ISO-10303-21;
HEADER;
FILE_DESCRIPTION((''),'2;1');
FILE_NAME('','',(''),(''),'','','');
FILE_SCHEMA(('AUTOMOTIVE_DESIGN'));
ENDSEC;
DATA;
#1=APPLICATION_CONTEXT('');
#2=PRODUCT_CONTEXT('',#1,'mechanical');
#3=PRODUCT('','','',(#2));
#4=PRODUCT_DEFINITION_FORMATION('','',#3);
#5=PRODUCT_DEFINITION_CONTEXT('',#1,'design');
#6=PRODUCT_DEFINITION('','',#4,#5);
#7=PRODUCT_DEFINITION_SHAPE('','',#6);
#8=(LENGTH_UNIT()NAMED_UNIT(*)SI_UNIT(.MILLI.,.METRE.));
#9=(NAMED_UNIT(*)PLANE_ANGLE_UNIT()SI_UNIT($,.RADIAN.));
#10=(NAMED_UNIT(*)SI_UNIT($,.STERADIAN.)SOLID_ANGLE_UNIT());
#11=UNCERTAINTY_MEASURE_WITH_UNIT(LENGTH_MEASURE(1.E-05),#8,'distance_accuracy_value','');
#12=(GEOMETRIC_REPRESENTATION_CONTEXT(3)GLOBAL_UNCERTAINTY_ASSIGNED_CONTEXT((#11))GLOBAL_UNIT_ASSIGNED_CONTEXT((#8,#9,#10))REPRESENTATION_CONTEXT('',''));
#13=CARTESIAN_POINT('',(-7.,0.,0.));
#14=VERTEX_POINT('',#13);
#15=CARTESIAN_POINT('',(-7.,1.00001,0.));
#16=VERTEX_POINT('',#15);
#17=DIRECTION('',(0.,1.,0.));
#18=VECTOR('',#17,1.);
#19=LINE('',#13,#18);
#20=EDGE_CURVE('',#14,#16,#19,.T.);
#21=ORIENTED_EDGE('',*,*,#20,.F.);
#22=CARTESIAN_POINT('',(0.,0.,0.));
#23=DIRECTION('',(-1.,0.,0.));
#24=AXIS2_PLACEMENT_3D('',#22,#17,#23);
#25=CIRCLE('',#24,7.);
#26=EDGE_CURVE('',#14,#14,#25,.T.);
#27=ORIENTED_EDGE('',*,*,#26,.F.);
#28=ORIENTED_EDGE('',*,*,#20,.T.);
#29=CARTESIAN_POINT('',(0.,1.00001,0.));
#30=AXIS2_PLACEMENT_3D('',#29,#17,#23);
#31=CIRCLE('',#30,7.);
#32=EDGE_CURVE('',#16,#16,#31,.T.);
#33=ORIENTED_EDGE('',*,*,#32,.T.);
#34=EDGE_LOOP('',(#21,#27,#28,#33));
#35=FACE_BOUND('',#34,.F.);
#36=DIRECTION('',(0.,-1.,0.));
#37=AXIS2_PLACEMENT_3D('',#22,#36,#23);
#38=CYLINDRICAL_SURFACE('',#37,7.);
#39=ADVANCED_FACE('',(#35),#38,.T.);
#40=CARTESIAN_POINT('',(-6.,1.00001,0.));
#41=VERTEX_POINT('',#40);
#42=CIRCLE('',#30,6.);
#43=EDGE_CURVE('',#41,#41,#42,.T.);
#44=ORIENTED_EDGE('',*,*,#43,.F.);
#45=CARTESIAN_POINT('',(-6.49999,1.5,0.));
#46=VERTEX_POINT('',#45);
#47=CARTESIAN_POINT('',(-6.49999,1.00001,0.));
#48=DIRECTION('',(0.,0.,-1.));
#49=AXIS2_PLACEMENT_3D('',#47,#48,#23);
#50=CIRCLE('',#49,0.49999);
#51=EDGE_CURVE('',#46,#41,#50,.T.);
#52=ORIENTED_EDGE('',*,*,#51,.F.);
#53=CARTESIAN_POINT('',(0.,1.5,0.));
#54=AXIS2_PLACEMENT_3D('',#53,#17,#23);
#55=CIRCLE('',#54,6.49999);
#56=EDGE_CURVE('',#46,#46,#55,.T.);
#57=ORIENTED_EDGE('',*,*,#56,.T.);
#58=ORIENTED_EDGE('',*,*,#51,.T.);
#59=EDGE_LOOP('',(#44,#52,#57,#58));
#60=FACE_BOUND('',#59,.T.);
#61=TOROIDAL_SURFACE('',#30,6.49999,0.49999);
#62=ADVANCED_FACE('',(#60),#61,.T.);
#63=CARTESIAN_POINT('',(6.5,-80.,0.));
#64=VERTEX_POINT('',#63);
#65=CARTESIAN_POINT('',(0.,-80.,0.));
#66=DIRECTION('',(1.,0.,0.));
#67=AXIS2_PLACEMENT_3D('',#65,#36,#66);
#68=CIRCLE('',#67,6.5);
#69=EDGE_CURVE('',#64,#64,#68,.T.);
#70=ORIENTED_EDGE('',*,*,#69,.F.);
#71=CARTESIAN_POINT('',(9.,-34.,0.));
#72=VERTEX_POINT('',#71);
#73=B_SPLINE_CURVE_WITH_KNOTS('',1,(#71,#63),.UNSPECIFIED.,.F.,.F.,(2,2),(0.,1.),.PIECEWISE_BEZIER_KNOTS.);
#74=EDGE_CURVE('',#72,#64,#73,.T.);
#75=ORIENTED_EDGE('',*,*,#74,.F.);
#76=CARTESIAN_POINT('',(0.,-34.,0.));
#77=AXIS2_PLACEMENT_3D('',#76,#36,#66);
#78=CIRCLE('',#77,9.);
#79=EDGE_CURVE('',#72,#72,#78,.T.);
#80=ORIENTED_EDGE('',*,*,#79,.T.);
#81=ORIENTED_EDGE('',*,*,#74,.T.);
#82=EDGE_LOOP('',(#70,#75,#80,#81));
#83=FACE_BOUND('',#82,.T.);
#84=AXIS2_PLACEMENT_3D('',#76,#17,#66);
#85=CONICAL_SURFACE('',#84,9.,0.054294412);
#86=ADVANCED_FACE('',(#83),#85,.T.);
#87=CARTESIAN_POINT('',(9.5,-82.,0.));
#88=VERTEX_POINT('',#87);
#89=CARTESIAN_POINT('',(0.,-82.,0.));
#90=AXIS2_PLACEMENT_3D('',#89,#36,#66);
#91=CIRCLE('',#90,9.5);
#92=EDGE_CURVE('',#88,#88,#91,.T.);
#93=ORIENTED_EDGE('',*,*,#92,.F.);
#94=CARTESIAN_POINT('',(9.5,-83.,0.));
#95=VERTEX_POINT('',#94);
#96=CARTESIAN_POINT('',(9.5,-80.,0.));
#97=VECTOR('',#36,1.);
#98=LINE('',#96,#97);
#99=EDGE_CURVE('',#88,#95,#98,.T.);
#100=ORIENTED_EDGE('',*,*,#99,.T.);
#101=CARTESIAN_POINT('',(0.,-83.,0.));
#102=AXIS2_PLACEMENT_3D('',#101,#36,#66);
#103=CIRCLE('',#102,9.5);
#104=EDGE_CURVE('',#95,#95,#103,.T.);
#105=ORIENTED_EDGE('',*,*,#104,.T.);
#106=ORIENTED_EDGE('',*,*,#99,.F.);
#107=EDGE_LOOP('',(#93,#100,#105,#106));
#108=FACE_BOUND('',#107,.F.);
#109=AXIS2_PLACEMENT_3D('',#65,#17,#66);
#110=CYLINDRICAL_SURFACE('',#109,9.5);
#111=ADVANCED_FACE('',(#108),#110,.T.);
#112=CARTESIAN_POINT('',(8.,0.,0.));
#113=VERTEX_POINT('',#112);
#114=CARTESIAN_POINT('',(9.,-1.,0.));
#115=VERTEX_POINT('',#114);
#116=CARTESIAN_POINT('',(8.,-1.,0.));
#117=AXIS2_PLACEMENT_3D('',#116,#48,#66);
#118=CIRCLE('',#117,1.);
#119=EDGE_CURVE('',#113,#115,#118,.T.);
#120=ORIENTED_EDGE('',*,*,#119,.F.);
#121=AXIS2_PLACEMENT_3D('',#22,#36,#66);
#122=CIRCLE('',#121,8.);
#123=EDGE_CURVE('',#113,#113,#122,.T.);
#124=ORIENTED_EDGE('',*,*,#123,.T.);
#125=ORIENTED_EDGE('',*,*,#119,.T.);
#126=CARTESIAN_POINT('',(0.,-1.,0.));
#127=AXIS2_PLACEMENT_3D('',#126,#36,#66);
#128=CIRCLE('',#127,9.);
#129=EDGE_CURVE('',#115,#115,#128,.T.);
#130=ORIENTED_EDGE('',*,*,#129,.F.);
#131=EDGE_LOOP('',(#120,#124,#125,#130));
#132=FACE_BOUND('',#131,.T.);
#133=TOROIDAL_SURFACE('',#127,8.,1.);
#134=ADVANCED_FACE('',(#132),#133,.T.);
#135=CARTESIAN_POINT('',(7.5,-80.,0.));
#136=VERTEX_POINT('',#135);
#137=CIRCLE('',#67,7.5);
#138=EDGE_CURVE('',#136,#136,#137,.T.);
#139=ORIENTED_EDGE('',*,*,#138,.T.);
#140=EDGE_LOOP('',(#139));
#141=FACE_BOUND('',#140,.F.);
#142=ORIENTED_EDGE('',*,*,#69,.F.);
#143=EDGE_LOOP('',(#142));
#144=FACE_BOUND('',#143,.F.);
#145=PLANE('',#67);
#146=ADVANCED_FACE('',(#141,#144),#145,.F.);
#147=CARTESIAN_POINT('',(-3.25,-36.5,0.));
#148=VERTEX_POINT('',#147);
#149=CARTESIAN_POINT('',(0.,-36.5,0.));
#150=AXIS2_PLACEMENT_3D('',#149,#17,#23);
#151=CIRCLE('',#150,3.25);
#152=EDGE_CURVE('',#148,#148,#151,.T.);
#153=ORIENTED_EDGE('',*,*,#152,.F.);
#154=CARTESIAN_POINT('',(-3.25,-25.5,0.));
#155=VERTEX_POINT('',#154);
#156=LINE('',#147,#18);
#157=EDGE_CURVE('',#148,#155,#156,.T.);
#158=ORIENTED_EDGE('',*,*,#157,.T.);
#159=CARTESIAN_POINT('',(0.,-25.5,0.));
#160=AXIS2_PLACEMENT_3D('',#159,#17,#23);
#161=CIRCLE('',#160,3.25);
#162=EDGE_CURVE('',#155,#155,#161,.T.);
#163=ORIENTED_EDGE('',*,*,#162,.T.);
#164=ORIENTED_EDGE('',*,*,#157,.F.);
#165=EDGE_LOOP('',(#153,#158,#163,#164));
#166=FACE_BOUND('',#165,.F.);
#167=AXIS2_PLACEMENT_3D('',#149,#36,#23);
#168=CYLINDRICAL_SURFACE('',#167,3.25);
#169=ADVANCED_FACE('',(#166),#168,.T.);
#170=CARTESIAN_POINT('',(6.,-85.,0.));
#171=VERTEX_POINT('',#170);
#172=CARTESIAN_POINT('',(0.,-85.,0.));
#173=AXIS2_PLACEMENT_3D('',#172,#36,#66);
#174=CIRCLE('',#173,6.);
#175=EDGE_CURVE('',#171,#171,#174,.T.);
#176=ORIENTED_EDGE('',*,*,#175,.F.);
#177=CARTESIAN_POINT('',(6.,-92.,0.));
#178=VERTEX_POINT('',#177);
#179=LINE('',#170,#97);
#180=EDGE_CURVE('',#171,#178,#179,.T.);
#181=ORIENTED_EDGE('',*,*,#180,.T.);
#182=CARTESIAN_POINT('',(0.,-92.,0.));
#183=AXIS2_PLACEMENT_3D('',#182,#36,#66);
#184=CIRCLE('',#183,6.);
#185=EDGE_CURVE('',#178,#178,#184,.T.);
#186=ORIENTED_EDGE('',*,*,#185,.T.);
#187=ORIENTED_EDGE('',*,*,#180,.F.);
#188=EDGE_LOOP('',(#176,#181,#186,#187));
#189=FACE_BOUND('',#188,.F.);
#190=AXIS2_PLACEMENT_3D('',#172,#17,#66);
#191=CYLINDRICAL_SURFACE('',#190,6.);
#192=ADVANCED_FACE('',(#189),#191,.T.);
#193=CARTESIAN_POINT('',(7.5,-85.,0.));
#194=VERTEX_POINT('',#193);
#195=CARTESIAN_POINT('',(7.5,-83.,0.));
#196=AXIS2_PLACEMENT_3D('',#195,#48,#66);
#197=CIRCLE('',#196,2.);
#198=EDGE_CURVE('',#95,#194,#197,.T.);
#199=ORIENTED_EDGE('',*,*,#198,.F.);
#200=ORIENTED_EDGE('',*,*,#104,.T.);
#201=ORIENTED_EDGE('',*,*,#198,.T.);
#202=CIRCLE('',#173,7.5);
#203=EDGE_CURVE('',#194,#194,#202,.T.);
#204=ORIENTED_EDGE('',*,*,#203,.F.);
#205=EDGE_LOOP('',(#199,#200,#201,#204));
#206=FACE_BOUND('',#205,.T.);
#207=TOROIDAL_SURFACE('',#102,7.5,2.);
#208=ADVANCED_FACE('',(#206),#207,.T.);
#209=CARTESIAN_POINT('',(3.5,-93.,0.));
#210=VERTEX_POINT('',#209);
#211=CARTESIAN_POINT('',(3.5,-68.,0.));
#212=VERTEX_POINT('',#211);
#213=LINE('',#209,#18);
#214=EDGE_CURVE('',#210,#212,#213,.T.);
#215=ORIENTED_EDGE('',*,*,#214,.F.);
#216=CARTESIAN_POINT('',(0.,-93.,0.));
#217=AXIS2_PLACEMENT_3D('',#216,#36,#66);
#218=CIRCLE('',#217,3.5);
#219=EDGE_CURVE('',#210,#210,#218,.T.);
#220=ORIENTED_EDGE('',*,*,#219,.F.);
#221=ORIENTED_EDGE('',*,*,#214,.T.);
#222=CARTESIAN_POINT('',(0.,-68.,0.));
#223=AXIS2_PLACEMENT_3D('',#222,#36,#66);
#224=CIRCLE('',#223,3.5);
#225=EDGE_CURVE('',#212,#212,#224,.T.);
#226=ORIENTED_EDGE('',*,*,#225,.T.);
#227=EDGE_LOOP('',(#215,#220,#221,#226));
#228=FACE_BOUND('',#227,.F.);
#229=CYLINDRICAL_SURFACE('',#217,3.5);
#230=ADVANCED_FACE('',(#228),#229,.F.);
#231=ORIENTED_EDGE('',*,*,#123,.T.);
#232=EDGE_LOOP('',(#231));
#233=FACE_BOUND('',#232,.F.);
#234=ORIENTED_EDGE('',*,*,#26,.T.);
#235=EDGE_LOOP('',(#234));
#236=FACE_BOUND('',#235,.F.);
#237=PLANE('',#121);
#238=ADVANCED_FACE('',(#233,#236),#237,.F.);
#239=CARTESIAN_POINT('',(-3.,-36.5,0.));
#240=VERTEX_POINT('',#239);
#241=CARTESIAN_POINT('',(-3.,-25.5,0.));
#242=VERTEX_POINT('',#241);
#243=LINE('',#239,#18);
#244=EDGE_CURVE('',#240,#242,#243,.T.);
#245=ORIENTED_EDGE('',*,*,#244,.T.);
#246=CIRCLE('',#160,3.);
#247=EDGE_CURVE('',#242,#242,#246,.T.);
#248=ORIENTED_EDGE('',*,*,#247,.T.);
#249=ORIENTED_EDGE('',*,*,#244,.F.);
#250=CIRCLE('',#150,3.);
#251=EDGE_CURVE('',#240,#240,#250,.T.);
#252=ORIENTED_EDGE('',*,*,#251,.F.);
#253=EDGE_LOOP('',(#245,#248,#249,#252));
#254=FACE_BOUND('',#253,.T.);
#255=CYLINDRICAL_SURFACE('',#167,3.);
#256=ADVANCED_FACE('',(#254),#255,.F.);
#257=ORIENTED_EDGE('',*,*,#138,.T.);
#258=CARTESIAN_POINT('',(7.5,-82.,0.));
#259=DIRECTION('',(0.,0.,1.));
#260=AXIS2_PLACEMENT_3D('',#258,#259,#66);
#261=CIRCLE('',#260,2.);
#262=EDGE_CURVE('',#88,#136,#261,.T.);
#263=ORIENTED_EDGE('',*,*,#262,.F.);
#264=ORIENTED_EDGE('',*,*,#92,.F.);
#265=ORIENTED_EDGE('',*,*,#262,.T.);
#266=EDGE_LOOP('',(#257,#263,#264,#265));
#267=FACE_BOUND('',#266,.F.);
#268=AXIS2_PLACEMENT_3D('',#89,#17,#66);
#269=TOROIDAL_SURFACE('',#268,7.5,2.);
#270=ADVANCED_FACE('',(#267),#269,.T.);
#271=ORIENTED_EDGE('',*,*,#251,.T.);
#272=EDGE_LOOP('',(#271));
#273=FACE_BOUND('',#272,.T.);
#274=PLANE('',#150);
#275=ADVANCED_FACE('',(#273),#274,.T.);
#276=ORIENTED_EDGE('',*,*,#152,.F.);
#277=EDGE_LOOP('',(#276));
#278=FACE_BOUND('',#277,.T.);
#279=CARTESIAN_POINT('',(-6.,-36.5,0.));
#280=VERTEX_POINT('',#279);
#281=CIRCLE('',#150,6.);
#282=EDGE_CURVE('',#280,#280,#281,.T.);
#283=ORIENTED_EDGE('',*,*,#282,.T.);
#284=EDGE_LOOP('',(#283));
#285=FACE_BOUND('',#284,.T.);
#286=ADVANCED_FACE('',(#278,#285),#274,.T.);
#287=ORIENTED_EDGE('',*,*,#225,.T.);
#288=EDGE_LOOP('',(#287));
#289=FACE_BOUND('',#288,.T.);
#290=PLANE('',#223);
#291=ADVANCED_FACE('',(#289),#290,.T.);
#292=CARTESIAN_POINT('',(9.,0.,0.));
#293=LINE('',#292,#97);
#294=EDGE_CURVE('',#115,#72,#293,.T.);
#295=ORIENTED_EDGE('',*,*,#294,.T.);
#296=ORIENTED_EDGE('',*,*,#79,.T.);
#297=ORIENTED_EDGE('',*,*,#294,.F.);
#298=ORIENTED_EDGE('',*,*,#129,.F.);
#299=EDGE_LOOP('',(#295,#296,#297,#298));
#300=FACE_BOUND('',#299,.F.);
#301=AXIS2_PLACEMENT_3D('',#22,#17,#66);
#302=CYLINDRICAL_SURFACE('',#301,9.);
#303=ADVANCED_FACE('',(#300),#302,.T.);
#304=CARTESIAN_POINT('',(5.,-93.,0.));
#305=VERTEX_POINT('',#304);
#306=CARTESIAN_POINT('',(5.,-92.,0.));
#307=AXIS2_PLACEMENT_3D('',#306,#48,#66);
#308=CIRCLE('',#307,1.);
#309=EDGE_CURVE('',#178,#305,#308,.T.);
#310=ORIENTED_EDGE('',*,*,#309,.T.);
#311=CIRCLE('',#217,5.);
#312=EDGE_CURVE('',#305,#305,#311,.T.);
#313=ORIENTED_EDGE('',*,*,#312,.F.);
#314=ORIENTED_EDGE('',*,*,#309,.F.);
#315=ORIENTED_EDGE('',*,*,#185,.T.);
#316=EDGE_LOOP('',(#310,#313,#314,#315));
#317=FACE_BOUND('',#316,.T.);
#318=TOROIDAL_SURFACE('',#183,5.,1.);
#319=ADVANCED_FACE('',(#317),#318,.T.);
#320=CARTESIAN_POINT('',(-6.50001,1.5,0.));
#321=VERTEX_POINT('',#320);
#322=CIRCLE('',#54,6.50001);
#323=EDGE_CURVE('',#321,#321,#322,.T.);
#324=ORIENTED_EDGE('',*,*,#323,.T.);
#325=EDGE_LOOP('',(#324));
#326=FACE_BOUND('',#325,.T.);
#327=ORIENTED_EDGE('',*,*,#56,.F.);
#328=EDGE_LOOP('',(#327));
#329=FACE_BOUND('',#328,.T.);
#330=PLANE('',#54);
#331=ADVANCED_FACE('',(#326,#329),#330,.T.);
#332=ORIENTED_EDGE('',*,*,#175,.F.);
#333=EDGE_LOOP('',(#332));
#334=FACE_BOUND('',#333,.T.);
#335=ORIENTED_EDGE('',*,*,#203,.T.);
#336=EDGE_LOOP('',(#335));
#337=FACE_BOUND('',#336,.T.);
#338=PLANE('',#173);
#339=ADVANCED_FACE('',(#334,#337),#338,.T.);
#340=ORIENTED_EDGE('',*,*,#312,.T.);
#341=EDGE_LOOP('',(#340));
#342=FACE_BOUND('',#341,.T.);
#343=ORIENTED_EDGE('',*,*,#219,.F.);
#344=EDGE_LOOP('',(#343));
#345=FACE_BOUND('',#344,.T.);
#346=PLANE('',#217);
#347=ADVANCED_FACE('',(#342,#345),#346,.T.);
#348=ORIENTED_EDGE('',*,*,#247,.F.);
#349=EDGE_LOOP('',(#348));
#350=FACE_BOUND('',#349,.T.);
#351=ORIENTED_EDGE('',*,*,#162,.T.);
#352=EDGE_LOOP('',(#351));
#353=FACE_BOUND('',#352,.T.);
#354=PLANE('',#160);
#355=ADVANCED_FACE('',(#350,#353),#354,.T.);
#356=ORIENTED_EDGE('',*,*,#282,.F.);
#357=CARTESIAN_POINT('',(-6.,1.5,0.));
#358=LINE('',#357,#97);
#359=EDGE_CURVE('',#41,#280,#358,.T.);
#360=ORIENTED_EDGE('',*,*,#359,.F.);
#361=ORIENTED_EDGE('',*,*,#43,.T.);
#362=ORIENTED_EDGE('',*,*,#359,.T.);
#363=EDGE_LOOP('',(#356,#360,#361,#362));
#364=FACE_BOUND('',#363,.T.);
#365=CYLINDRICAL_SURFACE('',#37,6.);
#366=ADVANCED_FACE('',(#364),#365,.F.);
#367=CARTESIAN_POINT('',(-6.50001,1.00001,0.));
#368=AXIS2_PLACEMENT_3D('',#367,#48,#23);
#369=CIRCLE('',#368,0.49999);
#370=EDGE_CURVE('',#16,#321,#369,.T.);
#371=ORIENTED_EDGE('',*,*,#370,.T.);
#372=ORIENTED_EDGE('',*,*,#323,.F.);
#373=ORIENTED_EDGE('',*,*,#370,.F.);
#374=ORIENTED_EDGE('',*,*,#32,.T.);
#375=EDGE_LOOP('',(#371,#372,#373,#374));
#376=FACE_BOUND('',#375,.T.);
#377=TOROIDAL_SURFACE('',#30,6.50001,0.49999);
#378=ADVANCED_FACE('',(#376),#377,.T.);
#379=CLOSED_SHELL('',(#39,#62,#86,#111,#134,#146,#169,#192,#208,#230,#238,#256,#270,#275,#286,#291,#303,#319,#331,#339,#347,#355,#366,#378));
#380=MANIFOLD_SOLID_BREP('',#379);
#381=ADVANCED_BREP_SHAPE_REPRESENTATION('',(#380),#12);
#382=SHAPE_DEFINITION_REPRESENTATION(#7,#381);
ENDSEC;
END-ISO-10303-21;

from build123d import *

# Parameters (mm, degrees)
F0_R      = 9
F1_DEPTH  = 34
F2_R      = 9
F4_R      = 6.5
F6_R      = 9.5
F7_DEPTH  = 5
F8_R      = 2
F9_R      = 6
F10_DEPTH = 8
F11_R     = 6
F12_DEPTH = 36.5
F13_R     = 7
F13_R_2   = 6
F14_DEPTH = 1.5
F15_R     = 1
F16_R     = 0.49999
F17_R     = 3.5
F18_DEPTH = 25
F19_R     = 1
F20_R     = 3.25
F20_R_2   = 3
F21_DEPTH = 11


# Not quite as in the source:
# - a fillet or chamfer is up to 0.001 mm smaller than in the source, because OpenCascade refuses the exact size


with BuildPart() as f1:
    # F0 (on Front) → F1 (new body)
    with BuildSketch(Plane.XZ):
        Circle(F0_R)
    extrude(amount=F1_DEPTH)

    # F2 (on face) → F5 section 0
    with BuildSketch(Plane.XZ.offset(34)):
        Circle(F2_R)
    # F4 (on offset) → F5 section 1
    with BuildSketch(Plane.XZ.offset(80)):
        Circle(F4_R)
    loft()

    # F6 (on face) → F7 (join)
    with BuildSketch(Plane.XZ.offset(80)):
        Circle(F6_R)
    extrude(amount=F7_DEPTH)

    # F8
    f8_edges = [f1.edges().sort_by_distance(p)[0] for p in [
        (-9.5, -85, 0),
        (-9.5, -80, 0),
    ]]
    fillet(f8_edges, radius=F8_R)

    # F9 (on face) → F10 (join)
    with BuildSketch(Plane.XZ.offset(85)):
        Circle(F9_R)
    extrude(amount=F10_DEPTH)

    # F11 (on face) → F12 (cut)
    with BuildSketch(Plane(origin=(0, 0, 0), x_dir=(-1, 0, 0), z_dir=(0, 1, 0))):
        Circle(F11_R)
    extrude(amount=-F12_DEPTH, mode=Mode.SUBTRACT)

    # F13 (on face) → F14 (join)
    with BuildSketch(Plane(origin=(0, 0, 0), x_dir=(-1, 0, 0), z_dir=(0, 1, 0))):
        Circle(F13_R)
        Circle(F13_R_2, mode=Mode.SUBTRACT)
    extrude(amount=F14_DEPTH)

    # F15
    f15_edges = [f1.edges().sort_by_distance(p)[0] for p in [
        (-9, 0, 0),
    ]]
    fillet(f15_edges, radius=F15_R)

    # F16 (radius 0.5 in the source; OpenCascade refuses exactly that, so slightly less here)
    f16_edges = [f1.edges().sort_by_distance(p)[0] for p in [
        (6, 1.5, 0),
        (7, 1.5, 0),
    ]]
    fillet(f16_edges, radius=F16_R)

    # F17 (on face) → F18 (cut)
    with BuildSketch(Plane.XZ.offset(93)):
        Circle(F17_R)
    extrude(amount=-F18_DEPTH, mode=Mode.SUBTRACT)

    # F19
    f19_edges = [f1.edges().sort_by_distance(p)[0] for p in [
        (-6, -93, 0),
    ]]
    fillet(f19_edges, radius=F19_R)

    # F20 (on face) → F21 (join)
    with BuildSketch(Plane(origin=(0, -36.5, 0), x_dir=(-1, 0, 0), z_dir=(0, 1, 0))):
        Circle(F20_R)
        Circle(F20_R_2, mode=Mode.SUBTRACT)
    extrude(amount=F21_DEPTH)


solid = f1.part
